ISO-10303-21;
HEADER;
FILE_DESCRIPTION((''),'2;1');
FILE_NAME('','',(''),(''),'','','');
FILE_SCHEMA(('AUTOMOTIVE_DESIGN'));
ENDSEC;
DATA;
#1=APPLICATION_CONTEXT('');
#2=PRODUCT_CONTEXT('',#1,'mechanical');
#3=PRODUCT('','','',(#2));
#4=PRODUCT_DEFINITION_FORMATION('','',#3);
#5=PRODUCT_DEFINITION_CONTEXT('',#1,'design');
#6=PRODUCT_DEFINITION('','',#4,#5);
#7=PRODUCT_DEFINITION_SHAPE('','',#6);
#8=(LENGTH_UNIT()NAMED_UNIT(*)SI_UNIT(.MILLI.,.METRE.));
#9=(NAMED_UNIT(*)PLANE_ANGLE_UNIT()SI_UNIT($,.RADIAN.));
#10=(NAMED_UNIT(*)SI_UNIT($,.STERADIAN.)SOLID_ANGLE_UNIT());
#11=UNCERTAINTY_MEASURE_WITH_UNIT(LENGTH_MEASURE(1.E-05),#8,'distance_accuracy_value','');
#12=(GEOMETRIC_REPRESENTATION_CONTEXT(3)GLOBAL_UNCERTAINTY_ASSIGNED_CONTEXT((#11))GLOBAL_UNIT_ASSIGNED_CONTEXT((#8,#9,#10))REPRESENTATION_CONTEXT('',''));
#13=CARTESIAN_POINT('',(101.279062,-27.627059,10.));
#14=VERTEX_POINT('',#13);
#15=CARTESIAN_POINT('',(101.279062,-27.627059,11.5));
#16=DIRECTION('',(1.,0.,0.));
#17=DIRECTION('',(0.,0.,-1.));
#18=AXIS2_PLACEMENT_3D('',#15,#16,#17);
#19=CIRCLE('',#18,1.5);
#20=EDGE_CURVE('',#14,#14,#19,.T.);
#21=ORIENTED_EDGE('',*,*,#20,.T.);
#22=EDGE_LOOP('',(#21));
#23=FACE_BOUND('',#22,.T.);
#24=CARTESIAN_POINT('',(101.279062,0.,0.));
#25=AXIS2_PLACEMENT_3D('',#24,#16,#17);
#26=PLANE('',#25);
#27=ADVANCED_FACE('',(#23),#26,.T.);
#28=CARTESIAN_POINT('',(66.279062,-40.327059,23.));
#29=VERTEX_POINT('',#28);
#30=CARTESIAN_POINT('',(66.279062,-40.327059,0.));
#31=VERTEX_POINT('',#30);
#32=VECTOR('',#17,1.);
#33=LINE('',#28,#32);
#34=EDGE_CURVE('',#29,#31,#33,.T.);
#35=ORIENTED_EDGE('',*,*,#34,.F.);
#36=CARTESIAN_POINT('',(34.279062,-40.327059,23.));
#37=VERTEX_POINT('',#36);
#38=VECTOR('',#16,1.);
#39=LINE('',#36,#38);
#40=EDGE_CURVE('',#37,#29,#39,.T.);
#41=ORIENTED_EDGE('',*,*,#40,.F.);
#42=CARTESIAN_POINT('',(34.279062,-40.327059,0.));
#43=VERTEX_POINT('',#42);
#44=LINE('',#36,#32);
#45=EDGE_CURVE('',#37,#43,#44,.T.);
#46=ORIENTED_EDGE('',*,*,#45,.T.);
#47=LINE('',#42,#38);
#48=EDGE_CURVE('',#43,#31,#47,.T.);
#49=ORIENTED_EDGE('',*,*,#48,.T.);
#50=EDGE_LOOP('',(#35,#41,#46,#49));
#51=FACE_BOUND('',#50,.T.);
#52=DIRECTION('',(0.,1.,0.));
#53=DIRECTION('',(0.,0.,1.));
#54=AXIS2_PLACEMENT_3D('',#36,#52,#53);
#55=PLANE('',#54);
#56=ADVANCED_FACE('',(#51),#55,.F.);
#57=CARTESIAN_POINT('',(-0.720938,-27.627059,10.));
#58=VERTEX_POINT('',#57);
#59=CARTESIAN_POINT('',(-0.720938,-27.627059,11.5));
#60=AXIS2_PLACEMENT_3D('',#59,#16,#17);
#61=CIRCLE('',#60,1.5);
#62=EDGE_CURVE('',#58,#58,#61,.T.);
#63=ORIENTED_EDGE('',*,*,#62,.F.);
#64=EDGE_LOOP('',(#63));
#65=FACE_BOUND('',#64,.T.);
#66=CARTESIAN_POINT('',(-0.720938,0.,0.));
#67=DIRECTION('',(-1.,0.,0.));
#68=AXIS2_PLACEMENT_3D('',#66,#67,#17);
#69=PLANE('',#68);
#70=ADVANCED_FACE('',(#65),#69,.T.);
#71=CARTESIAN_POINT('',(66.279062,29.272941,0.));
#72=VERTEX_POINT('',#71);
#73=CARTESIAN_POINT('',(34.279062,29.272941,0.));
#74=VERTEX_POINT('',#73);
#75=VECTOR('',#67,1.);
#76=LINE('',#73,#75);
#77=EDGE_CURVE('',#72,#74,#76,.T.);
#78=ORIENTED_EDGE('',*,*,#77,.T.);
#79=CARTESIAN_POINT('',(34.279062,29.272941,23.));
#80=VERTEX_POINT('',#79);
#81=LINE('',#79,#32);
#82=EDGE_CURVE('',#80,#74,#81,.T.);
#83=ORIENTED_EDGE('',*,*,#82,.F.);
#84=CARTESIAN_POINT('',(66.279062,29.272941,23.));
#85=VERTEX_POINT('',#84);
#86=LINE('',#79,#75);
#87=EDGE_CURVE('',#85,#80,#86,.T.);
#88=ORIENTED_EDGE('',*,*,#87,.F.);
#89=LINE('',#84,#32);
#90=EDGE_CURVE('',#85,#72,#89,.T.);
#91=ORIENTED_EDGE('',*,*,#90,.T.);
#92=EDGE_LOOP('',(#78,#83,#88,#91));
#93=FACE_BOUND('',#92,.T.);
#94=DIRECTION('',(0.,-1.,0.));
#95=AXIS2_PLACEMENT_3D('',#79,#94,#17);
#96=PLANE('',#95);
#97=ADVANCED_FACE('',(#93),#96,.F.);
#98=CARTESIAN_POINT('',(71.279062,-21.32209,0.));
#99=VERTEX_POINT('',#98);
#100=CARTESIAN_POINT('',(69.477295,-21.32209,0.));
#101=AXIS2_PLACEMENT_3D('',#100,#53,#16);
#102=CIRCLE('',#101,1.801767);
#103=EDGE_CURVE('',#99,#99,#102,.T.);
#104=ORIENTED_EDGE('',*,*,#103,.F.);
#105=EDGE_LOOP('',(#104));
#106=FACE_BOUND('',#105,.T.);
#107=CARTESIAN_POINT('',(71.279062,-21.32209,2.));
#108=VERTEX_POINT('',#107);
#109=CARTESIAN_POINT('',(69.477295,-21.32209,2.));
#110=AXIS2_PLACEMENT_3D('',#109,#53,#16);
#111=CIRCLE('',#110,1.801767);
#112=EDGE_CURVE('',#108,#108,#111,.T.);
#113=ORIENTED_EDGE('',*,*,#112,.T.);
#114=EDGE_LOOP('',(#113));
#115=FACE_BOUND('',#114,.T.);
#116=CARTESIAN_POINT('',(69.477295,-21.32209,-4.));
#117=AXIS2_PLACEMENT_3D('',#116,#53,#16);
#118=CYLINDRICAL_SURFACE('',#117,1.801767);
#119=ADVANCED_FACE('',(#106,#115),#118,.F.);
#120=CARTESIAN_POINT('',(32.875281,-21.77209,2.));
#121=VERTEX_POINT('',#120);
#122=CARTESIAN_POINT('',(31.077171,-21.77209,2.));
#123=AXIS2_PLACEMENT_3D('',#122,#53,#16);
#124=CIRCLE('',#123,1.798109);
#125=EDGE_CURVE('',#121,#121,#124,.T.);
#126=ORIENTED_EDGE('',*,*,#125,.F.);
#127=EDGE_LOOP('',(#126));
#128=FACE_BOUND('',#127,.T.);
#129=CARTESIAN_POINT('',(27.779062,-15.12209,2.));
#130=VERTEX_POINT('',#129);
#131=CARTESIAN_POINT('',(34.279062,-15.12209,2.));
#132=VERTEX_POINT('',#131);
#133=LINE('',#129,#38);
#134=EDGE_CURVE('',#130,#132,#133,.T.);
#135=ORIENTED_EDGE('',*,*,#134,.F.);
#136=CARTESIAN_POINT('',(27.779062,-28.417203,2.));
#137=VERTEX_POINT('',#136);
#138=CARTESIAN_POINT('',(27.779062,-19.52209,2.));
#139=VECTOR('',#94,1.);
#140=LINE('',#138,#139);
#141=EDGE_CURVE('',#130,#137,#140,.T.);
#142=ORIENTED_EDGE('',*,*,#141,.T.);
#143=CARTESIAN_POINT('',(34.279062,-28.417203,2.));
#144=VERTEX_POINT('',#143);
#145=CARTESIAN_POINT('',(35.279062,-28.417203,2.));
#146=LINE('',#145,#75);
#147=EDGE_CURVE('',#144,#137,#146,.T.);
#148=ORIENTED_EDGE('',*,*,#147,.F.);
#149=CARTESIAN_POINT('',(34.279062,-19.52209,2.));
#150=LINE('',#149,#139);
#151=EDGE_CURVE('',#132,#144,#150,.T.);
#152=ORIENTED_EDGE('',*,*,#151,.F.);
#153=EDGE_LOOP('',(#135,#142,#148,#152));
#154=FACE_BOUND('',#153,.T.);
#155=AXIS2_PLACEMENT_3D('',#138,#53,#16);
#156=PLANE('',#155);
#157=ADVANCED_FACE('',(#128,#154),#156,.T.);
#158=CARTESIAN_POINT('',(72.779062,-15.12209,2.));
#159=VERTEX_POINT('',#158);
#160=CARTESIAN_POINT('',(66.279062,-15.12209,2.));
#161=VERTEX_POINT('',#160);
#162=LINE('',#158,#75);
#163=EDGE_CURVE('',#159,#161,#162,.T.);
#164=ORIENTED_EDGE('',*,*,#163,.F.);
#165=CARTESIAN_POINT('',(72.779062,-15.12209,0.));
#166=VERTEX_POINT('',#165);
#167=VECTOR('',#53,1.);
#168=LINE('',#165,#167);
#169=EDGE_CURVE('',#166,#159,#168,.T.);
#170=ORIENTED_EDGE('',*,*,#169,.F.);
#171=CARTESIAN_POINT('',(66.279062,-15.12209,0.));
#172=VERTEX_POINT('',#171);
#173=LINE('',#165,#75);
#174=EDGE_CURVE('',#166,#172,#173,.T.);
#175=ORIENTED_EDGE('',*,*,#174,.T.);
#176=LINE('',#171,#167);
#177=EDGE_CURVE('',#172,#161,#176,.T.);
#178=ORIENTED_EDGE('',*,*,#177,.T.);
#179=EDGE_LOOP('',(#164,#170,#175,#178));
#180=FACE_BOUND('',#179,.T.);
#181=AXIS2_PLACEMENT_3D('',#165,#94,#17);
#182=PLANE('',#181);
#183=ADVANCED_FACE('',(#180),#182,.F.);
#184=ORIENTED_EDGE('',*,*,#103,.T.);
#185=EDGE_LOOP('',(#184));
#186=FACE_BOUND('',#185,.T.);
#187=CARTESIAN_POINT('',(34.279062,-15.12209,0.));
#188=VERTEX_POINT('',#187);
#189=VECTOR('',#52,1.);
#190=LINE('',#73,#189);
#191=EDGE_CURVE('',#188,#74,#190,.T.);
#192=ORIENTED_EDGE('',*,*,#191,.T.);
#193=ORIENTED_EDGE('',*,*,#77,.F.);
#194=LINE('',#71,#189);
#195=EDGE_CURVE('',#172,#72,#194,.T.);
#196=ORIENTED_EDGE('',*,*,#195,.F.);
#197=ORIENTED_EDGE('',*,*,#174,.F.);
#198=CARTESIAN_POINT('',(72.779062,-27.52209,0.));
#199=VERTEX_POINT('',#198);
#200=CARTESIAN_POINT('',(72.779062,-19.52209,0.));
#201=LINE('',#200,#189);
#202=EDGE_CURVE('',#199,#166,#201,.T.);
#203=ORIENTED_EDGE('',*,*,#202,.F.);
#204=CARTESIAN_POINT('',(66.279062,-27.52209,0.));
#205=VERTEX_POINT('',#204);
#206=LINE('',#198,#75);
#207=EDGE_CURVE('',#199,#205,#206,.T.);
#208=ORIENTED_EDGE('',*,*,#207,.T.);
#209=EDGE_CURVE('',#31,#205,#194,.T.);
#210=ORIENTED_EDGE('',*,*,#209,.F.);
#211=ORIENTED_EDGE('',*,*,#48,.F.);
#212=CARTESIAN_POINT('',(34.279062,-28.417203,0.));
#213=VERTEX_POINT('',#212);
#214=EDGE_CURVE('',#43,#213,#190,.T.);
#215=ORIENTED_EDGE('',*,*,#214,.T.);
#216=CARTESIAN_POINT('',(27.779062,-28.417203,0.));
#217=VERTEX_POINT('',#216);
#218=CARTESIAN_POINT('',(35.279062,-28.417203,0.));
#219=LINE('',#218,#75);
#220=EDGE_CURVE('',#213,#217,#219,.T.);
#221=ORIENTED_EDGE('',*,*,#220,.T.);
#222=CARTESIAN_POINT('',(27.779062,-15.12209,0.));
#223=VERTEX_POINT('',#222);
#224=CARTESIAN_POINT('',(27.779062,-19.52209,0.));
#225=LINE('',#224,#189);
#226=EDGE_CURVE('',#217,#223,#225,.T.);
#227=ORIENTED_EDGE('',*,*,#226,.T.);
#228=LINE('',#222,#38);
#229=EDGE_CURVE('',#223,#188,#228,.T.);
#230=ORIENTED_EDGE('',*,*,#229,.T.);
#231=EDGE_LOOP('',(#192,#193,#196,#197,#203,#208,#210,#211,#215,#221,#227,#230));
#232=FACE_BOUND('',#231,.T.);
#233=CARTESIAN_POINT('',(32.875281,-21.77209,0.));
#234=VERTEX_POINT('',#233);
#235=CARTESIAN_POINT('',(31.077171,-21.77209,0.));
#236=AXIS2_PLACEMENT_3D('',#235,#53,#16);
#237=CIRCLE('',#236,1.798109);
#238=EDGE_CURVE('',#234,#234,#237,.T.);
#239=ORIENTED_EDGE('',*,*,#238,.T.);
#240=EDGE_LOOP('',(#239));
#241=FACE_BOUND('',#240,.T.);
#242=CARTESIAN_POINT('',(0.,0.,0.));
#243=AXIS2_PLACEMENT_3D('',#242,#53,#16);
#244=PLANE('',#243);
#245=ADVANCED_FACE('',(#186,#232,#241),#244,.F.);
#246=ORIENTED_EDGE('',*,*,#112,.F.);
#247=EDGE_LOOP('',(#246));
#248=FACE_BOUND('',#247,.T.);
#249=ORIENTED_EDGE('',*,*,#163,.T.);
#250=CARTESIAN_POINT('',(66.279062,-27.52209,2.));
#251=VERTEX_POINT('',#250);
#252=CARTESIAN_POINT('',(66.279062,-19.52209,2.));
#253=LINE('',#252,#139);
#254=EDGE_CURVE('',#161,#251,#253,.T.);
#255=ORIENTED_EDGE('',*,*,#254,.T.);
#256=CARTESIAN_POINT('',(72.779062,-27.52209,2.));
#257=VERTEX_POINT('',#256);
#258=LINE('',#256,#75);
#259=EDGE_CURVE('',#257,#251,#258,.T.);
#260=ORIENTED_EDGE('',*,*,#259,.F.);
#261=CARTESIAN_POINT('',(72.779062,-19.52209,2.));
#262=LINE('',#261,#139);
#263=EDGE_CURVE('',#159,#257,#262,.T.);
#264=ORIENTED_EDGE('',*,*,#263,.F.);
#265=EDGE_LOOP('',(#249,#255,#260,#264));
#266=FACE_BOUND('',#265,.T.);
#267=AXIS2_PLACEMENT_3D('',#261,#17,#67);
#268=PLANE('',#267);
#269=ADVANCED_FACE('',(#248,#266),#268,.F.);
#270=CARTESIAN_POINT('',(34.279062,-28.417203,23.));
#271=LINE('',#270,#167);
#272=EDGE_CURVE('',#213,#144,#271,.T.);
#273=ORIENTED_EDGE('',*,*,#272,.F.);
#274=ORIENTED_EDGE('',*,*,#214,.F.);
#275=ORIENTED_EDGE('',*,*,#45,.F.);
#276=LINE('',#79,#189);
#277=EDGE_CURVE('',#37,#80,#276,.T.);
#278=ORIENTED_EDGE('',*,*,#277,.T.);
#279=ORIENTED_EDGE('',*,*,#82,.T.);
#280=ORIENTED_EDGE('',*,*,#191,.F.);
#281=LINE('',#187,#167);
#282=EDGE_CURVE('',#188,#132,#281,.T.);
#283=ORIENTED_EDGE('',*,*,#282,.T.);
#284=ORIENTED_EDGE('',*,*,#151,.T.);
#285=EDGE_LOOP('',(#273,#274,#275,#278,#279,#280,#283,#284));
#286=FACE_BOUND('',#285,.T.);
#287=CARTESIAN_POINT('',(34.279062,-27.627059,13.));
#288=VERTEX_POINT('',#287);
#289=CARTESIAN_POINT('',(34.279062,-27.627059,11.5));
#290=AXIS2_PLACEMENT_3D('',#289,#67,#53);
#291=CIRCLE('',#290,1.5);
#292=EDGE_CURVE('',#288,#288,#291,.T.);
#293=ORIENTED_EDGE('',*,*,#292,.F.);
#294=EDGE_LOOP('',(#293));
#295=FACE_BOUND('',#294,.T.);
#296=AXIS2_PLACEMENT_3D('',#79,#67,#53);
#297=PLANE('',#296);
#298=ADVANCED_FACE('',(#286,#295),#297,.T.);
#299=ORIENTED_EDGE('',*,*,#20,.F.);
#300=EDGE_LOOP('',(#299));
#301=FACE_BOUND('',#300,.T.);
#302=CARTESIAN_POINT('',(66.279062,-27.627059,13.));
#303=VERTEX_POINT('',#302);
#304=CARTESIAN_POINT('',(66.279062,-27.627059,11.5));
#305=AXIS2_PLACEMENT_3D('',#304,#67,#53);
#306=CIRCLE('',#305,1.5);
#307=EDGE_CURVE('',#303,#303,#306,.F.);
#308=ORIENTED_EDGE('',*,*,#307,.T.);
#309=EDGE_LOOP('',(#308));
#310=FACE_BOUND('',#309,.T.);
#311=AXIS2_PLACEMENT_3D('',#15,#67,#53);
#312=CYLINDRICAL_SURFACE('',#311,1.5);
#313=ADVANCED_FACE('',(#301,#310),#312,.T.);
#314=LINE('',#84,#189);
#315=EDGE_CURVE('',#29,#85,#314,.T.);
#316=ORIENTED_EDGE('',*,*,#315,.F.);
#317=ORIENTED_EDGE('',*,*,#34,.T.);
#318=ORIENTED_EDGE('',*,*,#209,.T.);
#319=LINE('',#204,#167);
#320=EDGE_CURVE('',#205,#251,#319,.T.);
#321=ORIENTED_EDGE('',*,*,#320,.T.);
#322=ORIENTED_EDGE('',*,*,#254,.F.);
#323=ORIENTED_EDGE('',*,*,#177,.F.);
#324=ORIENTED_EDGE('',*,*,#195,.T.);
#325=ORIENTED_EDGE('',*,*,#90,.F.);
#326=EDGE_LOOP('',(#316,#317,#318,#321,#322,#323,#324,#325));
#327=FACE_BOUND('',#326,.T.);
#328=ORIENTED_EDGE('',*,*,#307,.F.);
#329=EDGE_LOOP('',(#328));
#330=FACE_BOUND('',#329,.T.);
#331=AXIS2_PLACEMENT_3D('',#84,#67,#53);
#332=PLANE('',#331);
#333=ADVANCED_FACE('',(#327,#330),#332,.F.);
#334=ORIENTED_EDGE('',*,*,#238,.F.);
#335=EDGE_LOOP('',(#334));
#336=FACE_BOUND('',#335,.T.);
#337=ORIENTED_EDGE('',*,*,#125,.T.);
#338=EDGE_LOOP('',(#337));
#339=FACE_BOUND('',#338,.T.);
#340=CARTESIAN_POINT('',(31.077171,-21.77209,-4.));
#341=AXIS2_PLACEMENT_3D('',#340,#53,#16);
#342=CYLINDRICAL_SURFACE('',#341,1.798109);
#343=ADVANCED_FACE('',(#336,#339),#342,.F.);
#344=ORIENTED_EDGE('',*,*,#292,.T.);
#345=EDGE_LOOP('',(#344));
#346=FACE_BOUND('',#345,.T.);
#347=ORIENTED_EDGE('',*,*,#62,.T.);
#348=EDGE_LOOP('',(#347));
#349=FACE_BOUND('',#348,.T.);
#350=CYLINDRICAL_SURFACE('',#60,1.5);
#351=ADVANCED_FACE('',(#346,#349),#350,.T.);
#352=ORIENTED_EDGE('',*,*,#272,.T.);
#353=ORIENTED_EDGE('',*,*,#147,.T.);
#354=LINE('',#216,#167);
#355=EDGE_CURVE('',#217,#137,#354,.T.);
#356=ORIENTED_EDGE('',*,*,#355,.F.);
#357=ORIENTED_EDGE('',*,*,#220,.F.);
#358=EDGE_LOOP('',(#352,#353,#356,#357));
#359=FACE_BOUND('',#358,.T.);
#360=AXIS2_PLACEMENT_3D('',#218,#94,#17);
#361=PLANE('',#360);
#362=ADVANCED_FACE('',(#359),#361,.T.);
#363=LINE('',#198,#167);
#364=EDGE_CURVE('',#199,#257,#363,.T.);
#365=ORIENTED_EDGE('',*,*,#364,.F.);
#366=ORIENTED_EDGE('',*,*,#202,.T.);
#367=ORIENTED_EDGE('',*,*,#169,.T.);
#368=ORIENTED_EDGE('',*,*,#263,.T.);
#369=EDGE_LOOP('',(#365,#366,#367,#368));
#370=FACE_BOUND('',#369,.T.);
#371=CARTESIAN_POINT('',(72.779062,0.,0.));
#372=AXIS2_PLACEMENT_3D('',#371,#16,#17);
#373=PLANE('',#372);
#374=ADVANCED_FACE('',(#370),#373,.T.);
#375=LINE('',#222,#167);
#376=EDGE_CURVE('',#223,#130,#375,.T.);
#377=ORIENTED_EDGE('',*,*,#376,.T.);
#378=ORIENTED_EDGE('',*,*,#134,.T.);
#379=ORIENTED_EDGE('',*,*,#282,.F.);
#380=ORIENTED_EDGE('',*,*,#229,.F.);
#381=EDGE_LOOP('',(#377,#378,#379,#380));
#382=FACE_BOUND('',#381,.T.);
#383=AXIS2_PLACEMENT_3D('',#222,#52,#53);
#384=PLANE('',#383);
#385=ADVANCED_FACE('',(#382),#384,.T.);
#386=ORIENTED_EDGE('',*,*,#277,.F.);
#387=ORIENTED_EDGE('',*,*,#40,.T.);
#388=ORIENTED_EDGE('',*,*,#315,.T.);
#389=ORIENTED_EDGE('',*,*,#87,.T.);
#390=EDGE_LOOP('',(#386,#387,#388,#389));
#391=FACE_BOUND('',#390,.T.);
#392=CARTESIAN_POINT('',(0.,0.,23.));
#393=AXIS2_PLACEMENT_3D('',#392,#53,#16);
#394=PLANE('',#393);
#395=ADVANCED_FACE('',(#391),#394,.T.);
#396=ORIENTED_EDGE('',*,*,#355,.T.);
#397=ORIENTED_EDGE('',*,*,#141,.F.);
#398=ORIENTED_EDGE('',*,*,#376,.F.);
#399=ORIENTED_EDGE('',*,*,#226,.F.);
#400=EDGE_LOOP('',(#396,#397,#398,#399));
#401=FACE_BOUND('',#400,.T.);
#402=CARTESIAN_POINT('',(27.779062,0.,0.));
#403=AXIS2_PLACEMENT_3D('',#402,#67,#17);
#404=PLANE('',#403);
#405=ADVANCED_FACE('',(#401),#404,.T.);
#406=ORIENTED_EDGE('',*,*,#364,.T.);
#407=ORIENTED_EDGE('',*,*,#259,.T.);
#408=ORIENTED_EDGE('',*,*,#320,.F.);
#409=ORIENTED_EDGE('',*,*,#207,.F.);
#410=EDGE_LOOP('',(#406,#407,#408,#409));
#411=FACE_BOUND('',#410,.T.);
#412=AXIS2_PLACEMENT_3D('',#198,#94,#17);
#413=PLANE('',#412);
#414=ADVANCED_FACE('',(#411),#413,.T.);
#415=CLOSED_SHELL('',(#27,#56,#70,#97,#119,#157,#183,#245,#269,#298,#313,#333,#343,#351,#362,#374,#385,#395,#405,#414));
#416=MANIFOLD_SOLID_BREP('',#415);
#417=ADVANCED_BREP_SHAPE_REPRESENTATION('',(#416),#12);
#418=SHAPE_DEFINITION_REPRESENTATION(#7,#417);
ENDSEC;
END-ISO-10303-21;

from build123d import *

# Parameters (mm, degrees)
SKETCH_1_W            = 32
SKETCH_1_H            = 69.6
EXTRUDE_1_DEPTH       = 23
SKETCH_2_R            = 1.5
EXTRUDE_2_DEPTH       = 35
SKETCH_3_W            = 2
SKETCH_3_H            = 3.6
EXTRUDE_3_DEPTH       = 4.5
SKETCH_5_W            = 16
SKETCH_5_H            = 23
CUT_EXTRUDE_1_DEPTH   = 71.5
SKETCH_6_W            = 4.5
SKETCH_6_H            = 3.6
CUT_EXTRUDE_2_DEPTH   = 1
SKETCH_7_W            = 2
SKETCH_7_H            = 4.4
EXTRUDE_4_DEPTH       = 6.5
SKETCH_9_W            = 1
SKETCH_9_H            = 1.8
CUT_EXTRUDE_3_DEPTH   = 4.5
MIRROR_4_OUTLINE_W    = 4.5
MIRROR_4_OUTLINE_H    = 1.8
MIRROR_4_DEPTH        = 1
MIRROR_4_2_OUTLINE_W  = 6.5
MIRROR_4_2_OUTLINE_H  = 4.4
MIRROR_4_2_DEPTH      = 2
SKETCH_10_W           = 1.5
SKETCH_10_H           = 2
EXTRUDE_5_DEPTH       = 4.5
MIRROR_START          = 34.279062003
MIRROR_25_OUTLINE_W   = 69.6
MIRROR_25_OUTLINE_H   = 23
MIRROR_25_DEPTH       = 16
MIRROR_START_2        = -0.720937997
MIRROR_25_2_OUTLINE_R = 1.5
MIRROR_25_2_DEPTH     = 35
MIRROR_START_3        = 27.779062003
MIRROR_25_3_OUTLINE_W = 4.4
MIRROR_25_3_OUTLINE_H = 2
MIRROR_25_3_DEPTH     = 6.5
MIRROR_25_4_OUTLINE_W = 4.5
MIRROR_25_4_OUTLINE_H = 2
MIRROR_25_4_DEPTH     = 1.5
SKETCH_12_W           = 2
SKETCH_12_H           = 4.395113111
EXTRUDE_6_DEPTH       = 7.5
SKETCH_15_W           = 2
SKETCH_15_H           = 3.6
EXTRUDE_7_DEPTH       = 6
SKETCH_14_R           = 1.801767182
CUT_EXTRUDE_4_DEPTH   = 6
SKETCH_17_W           = 2
SKETCH_17_H           = 4.5
EXTRUDE_8_DEPTH       = 6
SKETCH_16_R           = 1.798109405
CUT_EXTRUDE_5_DEPTH   = 6


# Read off the part's stored shape, not the designer's step: ﾐﾗｰ4, ﾐﾗｰ25
with BuildPart() as part:
    # ｽｹｯﾁ1 → ﾎﾞｽ - 押し出し1 (new body)
    with BuildSketch(Plane.XY):
        with Locations((50.279062003, -5.527058824)):
            Rectangle(SKETCH_1_W, SKETCH_1_H)
    extrude(amount=EXTRUDE_1_DEPTH)

    # ｽｹｯﾁ2 → ﾎﾞｽ - 押し出し2 (add)
    with BuildSketch(Plane(origin=(66.279062003, 0, 0), x_dir=(0, 0, -1), z_dir=(1, 0, 0))):
        with Locations(Location((-11.5, -27.627058824, 0), (0, 0, 180))):
            Circle(SKETCH_2_R)
    extrude(amount=EXTRUDE_2_DEPTH)

    # ｽｹｯﾁ3 → ﾎﾞｽ - 押し出し3 (add)
    with BuildSketch(Plane(origin=(66.279062003, 0, 0), x_dir=(0, 0, -1), z_dir=(1, 0, 0))):
        with Locations((-1, -21.322089651)):
            Rectangle(SKETCH_3_W, SKETCH_3_H)
    extrude(amount=EXTRUDE_3_DEPTH)

    # ｽｹｯﾁ5 → ｶｯﾄ - 押し出し1 (cut)
    with BuildSketch(Plane(origin=(0, 29.272941176, 0), x_dir=(1, 0, 0), z_dir=(0, 1, 0))):
        with Locations((42.279062003, -11.5)):
            Rectangle(SKETCH_5_W, SKETCH_5_H)
    extrude(amount=-CUT_EXTRUDE_1_DEPTH, mode=Mode.SUBTRACT)

    # ｽｹｯﾁ6 → ｶｯﾄ - 押し出し2 (cut)
    with BuildSketch(Plane.XY.offset(2)):
        with Locations((68.529062003, -21.322089651)):
            Rectangle(SKETCH_6_W, SKETCH_6_H)
    extrude(amount=-CUT_EXTRUDE_2_DEPTH, mode=Mode.SUBTRACT)

    # ｽｹｯﾁ7 → ﾎﾞｽ - 押し出し4 (add)
    with BuildSketch(Plane(origin=(66.279062003, 0, 0), x_dir=(0, 0, -1), z_dir=(1, 0, 0))):
        with Locations((-1, -17.322089651)):
            Rectangle(SKETCH_7_W, SKETCH_7_H)
    extrude(amount=EXTRUDE_4_DEPTH)

    # ｽｹｯﾁ9 → ｶｯﾄ - 押し出し3 (cut)
    with BuildSketch(Plane(origin=(70.779062003, 0, 0), x_dir=(0, 0, -1), z_dir=(1, 0, 0))):
        with Locations((-0.5, -22.222089651)):
            Rectangle(SKETCH_9_W, SKETCH_9_H)
    extrude(amount=-CUT_EXTRUDE_3_DEPTH, mode=Mode.SUBTRACT)

    # ﾐﾗｰ4 outline → ﾐﾗｰ4 (cut)
    with BuildSketch(Plane.XY):
        with Locations((68.529062003, -20.422089651)):
            Rectangle(MIRROR_4_OUTLINE_W, MIRROR_4_OUTLINE_H)
    extrude(amount=MIRROR_4_DEPTH, mode=Mode.SUBTRACT)

    # Mirror 4 2 outline → Mirror 4 2 (add)
    with BuildSketch(Plane.XY):
        with Locations((69.529062003, -25.322089651)):
            Rectangle(MIRROR_4_2_OUTLINE_W, MIRROR_4_2_OUTLINE_H)
    extrude(amount=MIRROR_4_2_DEPTH)

    # ｽｹｯﾁ10 → ﾎﾞｽ - 押し出し5 (add)
    with BuildSketch(Plane.XZ.offset(19.522089651)):
        with Locations((72.029062003, 1)):
            Rectangle(SKETCH_10_W, SKETCH_10_H)
    extrude(amount=EXTRUDE_5_DEPTH)

    # ﾐﾗｰ25 outline → ﾐﾗｰ25 (add)
    with BuildSketch(Plane.YZ.offset(MIRROR_START)):
        with Locations((-5.527058824, 11.5)):
            Rectangle(MIRROR_25_OUTLINE_W, MIRROR_25_OUTLINE_H)
    extrude(amount=MIRROR_25_DEPTH)

    # Mirror 25 2 outline → Mirror 25 2 (add)
    with BuildSketch(Plane.YZ.offset(MIRROR_START_2)):
        with Locations((-27.627058824, 11.5)):
            Circle(MIRROR_25_2_OUTLINE_R)
    extrude(amount=MIRROR_25_2_DEPTH)

    # Mirror 25 3 outline → Mirror 25 3 (add)
    with BuildSketch(Plane.YZ.offset(MIRROR_START_3)):
        with Locations((-17.322089651, 1)):
            Rectangle(MIRROR_25_3_OUTLINE_W, MIRROR_25_3_OUTLINE_H)
    extrude(amount=MIRROR_25_3_DEPTH)

    # Mirror 25 4 outline → Mirror 25 4 (add)
    with BuildSketch(Plane.YZ.offset(MIRROR_START_3)):
        with Locations((-21.772089651, 1)):
            Rectangle(MIRROR_25_4_OUTLINE_W, MIRROR_25_4_OUTLINE_H)
    extrude(amount=MIRROR_25_4_DEPTH)

    # ｽｹｯﾁ12 → ﾎﾞｽ - 押し出し6 (add)
    with BuildSketch(Plane.ZY.offset(-27.779062003)):
        with Locations((1, -26.219646207)):
            Rectangle(SKETCH_12_W, SKETCH_12_H)
    extrude(amount=-EXTRUDE_6_DEPTH)

    # ｽｹｯﾁ15 → ﾎﾞｽ - 押し出し7 (add)
    with BuildSketch(Plane(origin=(66.279062003, 0, 0), x_dir=(0, 0, -1), z_dir=(1, 0, 0))):
        with Locations((-1, -21.322089651)):
            Rectangle(SKETCH_15_W, SKETCH_15_H)
    extrude(amount=EXTRUDE_7_DEPTH)

    # ｽｹｯﾁ14 → ｶｯﾄ - 押し出し4 (cut)
    with BuildSketch(Plane.XY.offset(2)):
        with Locations((69.477294821, -21.322089651)):
            Circle(SKETCH_14_R)
    extrude(amount=-CUT_EXTRUDE_4_DEPTH, mode=Mode.SUBTRACT)

    # ｽｹｯﾁ17 → ﾎﾞｽ - 押し出し8 (add)
    with BuildSketch(Plane.ZY.offset(-34.279062003)):
        with Locations((1, -21.772089651)):
            Rectangle(SKETCH_17_W, SKETCH_17_H)
    extrude(amount=EXTRUDE_8_DEPTH)

    # ｽｹｯﾁ16 → ｶｯﾄ - 押し出し5 (cut)
    with BuildSketch(Plane.XY.offset(2)):
        with Locations((31.077171408, -21.772089651)):
            Circle(SKETCH_16_R)
    extrude(amount=-CUT_EXTRUDE_5_DEPTH, mode=Mode.SUBTRACT)


solid = part.part
